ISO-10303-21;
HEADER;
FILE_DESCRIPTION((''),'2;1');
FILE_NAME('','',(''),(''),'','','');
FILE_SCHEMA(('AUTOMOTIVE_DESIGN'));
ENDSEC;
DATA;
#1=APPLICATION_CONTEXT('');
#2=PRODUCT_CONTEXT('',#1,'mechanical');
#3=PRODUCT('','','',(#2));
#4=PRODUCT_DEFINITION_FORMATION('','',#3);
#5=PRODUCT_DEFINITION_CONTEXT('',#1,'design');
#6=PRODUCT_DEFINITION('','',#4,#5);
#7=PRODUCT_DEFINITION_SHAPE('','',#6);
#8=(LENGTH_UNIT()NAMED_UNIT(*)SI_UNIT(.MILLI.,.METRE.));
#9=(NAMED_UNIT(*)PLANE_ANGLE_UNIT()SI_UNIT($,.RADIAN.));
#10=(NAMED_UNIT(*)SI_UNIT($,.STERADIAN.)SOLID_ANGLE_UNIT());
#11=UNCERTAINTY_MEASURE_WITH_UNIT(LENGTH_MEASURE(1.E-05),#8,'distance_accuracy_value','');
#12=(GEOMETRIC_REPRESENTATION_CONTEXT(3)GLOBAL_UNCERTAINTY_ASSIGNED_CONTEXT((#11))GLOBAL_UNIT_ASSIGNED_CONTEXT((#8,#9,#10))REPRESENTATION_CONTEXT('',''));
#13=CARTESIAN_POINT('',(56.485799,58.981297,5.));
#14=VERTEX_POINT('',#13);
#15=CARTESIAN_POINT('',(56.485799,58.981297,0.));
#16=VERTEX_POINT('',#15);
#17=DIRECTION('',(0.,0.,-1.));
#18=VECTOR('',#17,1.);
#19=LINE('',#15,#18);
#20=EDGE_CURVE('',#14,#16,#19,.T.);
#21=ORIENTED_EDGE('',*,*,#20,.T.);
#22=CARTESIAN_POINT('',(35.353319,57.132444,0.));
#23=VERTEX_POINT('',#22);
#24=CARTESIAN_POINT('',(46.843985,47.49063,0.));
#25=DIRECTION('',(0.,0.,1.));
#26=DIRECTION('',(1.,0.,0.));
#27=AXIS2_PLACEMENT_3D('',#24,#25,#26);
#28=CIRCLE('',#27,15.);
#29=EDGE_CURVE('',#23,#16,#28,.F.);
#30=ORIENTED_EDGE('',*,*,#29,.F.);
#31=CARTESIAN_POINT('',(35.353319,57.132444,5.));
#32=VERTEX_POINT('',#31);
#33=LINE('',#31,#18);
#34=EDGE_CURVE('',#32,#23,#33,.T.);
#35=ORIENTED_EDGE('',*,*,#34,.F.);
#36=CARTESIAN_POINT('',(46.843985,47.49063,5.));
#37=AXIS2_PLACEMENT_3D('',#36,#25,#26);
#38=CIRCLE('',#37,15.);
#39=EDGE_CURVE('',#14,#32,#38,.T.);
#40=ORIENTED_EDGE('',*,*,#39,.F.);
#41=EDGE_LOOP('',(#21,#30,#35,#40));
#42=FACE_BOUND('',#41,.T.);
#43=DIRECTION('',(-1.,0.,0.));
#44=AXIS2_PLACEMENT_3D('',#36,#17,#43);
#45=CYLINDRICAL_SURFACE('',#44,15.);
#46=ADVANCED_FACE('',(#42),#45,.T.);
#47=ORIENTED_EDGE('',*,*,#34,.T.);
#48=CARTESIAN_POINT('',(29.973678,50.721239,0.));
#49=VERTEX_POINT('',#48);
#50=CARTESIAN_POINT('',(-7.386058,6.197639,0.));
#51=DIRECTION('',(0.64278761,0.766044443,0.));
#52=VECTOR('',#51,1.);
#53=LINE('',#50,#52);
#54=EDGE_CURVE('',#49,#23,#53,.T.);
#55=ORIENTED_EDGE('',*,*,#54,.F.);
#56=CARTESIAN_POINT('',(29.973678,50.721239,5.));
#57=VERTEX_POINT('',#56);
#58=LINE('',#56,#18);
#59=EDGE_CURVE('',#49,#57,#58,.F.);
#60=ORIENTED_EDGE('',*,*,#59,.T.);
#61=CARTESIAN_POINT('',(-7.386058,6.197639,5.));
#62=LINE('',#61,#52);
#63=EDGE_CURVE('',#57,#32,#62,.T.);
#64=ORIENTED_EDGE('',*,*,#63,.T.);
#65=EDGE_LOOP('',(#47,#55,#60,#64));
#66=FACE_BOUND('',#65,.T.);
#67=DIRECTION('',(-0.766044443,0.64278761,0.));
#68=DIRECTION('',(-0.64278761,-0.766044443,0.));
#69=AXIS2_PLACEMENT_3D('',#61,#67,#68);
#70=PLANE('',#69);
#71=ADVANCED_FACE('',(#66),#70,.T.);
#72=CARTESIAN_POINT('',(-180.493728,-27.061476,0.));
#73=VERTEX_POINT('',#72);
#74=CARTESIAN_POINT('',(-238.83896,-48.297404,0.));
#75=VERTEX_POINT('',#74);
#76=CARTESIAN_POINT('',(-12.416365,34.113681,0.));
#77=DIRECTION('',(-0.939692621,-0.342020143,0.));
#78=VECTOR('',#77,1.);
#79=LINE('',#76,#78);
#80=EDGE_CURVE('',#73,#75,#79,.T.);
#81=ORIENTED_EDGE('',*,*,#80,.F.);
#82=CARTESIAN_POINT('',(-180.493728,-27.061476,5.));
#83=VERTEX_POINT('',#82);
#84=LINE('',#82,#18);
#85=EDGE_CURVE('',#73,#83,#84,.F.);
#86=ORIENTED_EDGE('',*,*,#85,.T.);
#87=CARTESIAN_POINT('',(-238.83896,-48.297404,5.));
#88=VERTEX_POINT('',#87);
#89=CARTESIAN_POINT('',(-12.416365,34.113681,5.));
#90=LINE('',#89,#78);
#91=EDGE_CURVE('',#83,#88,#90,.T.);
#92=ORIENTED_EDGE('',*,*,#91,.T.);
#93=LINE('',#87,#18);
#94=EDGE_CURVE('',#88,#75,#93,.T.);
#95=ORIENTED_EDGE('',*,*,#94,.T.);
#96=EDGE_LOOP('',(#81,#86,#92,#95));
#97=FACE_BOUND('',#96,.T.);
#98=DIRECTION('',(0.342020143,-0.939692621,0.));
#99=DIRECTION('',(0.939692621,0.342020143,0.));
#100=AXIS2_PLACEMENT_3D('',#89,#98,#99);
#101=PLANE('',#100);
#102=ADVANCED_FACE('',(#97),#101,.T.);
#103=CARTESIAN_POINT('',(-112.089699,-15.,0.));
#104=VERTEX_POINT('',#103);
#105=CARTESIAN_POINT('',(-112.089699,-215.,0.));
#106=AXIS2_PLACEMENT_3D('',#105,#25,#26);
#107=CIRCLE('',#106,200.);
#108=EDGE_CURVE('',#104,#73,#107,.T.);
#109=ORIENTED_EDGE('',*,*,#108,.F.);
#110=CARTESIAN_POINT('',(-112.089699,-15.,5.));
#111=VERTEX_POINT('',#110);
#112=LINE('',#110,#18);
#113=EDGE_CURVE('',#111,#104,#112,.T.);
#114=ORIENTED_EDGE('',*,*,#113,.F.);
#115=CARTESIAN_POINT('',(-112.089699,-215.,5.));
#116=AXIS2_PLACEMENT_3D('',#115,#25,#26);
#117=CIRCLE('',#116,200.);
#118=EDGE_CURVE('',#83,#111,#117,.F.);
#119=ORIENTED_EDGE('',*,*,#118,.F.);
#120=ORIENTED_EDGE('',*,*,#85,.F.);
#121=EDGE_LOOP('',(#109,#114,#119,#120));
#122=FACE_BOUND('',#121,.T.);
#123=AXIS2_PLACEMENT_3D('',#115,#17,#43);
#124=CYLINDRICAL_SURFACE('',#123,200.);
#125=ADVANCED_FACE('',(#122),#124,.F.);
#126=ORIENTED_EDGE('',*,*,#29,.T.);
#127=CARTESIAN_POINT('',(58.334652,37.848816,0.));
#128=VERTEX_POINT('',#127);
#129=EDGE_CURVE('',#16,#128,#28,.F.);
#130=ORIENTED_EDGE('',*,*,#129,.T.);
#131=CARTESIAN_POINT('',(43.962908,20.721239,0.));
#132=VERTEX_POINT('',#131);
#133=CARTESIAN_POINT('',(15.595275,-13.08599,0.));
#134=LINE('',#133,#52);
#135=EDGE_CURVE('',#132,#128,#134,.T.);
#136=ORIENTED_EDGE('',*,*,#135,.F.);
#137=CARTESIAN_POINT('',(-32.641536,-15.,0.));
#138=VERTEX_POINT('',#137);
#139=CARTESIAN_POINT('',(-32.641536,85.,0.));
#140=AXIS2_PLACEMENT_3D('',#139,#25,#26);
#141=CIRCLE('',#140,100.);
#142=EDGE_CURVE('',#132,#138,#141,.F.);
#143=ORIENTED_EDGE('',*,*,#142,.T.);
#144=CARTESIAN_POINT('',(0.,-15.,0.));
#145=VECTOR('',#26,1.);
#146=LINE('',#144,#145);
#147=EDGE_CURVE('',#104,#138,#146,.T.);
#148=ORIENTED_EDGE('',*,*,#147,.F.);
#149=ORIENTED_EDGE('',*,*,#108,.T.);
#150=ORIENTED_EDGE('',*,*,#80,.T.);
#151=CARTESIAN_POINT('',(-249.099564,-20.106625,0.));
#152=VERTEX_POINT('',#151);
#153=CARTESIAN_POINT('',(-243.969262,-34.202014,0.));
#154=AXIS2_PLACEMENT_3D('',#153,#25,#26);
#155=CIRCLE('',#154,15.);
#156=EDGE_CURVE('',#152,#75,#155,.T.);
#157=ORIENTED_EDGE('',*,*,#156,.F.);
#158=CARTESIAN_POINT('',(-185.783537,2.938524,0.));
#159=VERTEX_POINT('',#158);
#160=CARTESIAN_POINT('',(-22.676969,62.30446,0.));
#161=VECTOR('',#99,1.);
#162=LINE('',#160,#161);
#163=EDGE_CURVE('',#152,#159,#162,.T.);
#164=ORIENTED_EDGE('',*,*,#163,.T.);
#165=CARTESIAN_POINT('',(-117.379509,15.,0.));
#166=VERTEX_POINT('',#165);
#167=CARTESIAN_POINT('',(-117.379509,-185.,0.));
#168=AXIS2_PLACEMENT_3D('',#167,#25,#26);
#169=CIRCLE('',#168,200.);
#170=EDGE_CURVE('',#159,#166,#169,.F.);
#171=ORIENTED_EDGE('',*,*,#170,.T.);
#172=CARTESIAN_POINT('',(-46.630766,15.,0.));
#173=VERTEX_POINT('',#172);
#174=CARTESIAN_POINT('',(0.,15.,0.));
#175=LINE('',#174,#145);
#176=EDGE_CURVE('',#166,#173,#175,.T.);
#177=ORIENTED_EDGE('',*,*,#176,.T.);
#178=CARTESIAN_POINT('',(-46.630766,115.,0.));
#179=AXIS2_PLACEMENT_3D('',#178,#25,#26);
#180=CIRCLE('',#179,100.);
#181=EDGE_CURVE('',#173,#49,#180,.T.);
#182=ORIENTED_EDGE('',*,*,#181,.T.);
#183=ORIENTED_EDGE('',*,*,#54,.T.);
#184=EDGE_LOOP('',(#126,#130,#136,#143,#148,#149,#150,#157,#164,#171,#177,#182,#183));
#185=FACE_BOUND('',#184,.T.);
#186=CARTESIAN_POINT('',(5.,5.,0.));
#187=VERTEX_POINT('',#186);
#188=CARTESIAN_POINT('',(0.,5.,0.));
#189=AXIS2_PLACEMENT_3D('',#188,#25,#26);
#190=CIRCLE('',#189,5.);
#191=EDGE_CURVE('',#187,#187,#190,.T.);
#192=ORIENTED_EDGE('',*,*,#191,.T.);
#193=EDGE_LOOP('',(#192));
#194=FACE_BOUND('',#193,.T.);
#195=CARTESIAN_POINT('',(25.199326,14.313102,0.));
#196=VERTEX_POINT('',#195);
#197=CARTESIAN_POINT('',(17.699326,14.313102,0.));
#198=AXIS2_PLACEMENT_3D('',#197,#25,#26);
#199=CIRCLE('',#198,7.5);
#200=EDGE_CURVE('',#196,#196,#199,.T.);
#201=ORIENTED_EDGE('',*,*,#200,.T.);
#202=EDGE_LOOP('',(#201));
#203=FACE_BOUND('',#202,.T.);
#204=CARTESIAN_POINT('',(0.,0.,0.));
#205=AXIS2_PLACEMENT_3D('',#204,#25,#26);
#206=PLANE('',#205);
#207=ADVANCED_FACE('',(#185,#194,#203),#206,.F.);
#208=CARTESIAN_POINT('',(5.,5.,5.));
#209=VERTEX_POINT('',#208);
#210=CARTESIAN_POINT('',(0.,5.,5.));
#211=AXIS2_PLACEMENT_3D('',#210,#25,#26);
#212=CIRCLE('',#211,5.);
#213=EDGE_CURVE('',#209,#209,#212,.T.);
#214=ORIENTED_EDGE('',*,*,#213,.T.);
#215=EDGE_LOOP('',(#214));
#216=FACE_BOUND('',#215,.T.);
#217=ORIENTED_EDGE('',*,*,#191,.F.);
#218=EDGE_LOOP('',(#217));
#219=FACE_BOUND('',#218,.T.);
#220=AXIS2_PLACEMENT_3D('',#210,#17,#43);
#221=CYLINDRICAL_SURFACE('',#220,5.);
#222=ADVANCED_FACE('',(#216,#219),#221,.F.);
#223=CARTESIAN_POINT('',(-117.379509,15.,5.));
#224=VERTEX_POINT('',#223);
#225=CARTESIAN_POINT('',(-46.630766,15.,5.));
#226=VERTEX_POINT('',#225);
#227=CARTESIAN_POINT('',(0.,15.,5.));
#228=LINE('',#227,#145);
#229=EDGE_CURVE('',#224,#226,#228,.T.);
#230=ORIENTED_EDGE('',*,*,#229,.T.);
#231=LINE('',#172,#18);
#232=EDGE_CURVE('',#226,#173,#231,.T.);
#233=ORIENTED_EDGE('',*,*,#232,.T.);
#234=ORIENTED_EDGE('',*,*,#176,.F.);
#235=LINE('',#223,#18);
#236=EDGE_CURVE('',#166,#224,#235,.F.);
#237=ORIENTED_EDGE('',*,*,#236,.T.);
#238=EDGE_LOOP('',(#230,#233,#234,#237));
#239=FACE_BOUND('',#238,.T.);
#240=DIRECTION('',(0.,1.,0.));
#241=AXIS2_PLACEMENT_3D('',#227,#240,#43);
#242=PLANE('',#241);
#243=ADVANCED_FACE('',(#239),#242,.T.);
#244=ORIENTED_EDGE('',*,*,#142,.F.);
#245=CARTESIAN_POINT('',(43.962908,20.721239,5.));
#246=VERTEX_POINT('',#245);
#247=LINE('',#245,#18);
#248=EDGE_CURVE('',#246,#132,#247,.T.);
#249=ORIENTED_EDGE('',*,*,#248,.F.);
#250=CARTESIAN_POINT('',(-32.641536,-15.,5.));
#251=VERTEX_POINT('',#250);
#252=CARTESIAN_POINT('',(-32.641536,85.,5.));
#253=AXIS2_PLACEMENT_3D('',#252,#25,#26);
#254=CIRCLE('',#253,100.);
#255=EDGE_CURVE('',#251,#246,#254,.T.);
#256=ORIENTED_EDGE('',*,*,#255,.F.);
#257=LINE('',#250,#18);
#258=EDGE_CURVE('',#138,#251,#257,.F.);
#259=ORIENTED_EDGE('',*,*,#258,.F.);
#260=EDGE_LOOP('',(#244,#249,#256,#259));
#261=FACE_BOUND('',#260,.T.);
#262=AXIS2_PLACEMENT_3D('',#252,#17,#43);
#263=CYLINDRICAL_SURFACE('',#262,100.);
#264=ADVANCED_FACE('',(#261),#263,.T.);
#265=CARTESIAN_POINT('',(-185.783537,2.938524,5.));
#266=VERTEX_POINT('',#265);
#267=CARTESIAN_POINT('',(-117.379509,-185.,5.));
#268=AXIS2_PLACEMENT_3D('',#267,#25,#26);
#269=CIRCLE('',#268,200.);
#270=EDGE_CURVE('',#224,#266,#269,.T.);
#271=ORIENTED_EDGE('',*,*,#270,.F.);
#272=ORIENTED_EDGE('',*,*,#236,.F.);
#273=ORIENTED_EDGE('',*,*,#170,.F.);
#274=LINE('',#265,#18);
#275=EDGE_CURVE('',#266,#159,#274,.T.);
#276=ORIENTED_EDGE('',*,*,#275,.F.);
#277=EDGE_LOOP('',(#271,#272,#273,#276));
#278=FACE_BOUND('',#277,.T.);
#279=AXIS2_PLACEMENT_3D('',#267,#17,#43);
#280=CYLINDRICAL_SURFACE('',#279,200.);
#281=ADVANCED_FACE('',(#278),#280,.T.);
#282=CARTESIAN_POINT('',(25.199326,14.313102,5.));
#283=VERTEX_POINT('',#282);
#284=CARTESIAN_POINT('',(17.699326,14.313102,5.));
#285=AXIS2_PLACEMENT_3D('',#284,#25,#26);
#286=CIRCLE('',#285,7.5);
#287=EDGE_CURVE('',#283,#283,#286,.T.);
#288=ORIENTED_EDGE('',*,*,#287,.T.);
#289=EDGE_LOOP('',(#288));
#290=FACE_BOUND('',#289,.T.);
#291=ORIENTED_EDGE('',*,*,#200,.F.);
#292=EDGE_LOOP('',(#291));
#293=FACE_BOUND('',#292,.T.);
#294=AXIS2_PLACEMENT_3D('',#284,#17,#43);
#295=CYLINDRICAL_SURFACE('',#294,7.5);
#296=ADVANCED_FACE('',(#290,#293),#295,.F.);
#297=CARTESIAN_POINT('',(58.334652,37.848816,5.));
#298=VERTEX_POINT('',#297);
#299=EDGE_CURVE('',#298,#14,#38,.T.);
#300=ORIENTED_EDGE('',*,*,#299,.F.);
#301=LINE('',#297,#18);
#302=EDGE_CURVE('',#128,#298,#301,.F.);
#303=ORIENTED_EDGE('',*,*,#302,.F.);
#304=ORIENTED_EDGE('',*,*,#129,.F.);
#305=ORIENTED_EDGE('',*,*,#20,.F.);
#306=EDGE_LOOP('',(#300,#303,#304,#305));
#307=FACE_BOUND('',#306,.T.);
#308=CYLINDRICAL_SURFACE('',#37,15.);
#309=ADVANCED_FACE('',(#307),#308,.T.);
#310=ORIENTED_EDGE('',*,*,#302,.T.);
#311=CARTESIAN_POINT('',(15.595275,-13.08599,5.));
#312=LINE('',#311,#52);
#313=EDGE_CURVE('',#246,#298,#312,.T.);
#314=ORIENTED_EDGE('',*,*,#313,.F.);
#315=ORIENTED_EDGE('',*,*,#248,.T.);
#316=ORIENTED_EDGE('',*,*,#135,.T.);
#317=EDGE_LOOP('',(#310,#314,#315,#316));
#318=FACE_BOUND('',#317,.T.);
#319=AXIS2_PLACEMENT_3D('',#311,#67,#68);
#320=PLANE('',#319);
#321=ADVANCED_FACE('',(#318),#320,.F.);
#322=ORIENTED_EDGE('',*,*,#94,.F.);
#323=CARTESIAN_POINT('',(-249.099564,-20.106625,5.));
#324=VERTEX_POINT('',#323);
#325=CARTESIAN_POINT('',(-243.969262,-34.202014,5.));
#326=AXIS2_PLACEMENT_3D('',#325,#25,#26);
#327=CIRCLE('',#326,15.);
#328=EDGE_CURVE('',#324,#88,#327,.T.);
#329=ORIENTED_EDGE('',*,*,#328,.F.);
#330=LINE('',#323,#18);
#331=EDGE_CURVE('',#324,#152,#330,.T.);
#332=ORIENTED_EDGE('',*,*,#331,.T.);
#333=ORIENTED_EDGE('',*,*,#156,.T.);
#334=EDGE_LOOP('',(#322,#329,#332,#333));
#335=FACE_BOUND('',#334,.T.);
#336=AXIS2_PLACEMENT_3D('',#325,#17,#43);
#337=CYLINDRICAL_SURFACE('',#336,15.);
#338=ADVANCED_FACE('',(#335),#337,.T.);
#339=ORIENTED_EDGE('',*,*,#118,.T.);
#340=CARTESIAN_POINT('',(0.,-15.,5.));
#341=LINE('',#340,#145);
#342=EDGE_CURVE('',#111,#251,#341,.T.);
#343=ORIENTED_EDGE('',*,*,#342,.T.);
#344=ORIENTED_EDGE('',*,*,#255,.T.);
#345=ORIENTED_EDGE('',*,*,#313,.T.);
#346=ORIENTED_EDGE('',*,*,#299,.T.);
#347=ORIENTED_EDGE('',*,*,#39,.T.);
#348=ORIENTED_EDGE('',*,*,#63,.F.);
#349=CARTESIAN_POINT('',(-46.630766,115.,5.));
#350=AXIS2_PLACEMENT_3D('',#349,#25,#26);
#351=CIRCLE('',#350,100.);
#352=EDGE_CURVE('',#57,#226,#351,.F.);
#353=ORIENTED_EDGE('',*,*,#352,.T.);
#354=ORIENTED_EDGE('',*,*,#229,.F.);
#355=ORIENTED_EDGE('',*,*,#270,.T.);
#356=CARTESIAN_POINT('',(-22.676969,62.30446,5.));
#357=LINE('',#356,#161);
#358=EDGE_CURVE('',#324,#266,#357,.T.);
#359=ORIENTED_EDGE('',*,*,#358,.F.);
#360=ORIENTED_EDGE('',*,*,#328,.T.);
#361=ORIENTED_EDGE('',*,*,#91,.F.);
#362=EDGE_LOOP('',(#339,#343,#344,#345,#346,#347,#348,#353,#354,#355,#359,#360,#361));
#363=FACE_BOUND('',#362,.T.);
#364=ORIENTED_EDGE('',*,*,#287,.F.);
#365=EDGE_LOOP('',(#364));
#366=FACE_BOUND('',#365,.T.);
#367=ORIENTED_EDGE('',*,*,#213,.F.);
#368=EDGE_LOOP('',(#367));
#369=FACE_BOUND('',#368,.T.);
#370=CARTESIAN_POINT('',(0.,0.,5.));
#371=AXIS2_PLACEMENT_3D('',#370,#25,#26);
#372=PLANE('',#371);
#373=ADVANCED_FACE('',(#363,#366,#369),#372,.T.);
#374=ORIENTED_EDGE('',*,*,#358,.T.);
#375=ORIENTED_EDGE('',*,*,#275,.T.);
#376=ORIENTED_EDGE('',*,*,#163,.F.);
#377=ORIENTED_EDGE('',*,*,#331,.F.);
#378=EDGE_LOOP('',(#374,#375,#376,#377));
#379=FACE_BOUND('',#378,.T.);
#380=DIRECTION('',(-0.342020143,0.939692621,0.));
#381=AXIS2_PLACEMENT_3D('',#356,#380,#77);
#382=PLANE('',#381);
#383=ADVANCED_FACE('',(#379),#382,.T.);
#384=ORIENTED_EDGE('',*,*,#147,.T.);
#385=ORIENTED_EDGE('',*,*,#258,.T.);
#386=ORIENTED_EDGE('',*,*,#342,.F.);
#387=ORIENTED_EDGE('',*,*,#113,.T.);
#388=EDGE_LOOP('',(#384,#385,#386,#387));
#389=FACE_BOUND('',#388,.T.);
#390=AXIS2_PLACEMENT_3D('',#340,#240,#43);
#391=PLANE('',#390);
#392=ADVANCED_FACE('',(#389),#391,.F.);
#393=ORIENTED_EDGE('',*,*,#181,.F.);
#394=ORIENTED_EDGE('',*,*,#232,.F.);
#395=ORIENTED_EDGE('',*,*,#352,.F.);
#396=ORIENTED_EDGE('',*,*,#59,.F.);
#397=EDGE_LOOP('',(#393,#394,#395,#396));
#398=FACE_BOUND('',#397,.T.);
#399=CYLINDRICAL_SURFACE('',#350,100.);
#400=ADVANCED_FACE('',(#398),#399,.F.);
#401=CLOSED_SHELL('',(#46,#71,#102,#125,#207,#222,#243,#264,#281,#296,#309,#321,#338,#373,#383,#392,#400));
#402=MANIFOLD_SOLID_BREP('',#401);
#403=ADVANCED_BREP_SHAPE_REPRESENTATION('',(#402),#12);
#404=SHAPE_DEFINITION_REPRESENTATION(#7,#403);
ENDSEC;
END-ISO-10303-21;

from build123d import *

# Parameters (mm, degrees)
SKETCH_2_R      = 5
SKETCH_2_R_2    = 7.5
EXTRUDE_1_DEPTH = 5
FILLET_1_R      = 200
FILLET_2_R      = 100
FILLET_3_R      = 15


with BuildPart() as part:
    # 草图2 → 凸台-拉伸1 (new body)
    with BuildSketch(Plane.XY):
        with BuildLine():
            Line((-152.644904711, 15), (-249.099564228, -20.106625021))
            ThreePointArc((-249.099564228, -20.106625021), (-258.06465139, -39.332316482), (-238.838959929, -48.297403644))
            Line((-238.838959929, -48.297403644), (-147.355095289, -15))
            Line((-147.355095289, -15), (13.989229745, -15))
            Line((13.989229745, -15), (67.976465972, 49.339482728))
            Line((67.976465972, 49.339482728), (44.995132678, 68.623111018))
            Line((44.995132678, 68.623111018), (0, 15))
            Line((0, 15), (-152.644904711, 15))
        make_face()
        with Locations((0, 5)):
            Circle(SKETCH_2_R, mode=Mode.SUBTRACT)
        with Locations((17.699325905, 14.313101658)):
            Circle(SKETCH_2_R_2, mode=Mode.SUBTRACT)
    extrude(amount=EXTRUDE_1_DEPTH)

    # 圆角1
    fillet_1_edges = [part.edges().sort_by_distance(p)[0] for p in [
        (-152.644904711, 15, 2.5),
        (-147.355095289, -15, 2.5),
    ]]
    fillet(fillet_1_edges, radius=FILLET_1_R)

    # 圆角2
    fillet_2_edges = [part.edges().sort_by_distance(p)[0] for p in [
        (0, 15, 2.5),
        (13.989229745, -15, 2.5),
    ]]
    fillet(fillet_2_edges, radius=FILLET_2_R)

    # 圆角3
    fillet_3_edges = [part.edges().sort_by_distance(p)[0] for p in [
        (44.995132678, 68.623111018, 2.5),
        (67.976465972, 49.339482728, 2.5),
    ]]
    fillet(fillet_3_edges, radius=FILLET_3_R - 0.0001)  # a hair under: the kernel refuses the full size


solid = part.part
